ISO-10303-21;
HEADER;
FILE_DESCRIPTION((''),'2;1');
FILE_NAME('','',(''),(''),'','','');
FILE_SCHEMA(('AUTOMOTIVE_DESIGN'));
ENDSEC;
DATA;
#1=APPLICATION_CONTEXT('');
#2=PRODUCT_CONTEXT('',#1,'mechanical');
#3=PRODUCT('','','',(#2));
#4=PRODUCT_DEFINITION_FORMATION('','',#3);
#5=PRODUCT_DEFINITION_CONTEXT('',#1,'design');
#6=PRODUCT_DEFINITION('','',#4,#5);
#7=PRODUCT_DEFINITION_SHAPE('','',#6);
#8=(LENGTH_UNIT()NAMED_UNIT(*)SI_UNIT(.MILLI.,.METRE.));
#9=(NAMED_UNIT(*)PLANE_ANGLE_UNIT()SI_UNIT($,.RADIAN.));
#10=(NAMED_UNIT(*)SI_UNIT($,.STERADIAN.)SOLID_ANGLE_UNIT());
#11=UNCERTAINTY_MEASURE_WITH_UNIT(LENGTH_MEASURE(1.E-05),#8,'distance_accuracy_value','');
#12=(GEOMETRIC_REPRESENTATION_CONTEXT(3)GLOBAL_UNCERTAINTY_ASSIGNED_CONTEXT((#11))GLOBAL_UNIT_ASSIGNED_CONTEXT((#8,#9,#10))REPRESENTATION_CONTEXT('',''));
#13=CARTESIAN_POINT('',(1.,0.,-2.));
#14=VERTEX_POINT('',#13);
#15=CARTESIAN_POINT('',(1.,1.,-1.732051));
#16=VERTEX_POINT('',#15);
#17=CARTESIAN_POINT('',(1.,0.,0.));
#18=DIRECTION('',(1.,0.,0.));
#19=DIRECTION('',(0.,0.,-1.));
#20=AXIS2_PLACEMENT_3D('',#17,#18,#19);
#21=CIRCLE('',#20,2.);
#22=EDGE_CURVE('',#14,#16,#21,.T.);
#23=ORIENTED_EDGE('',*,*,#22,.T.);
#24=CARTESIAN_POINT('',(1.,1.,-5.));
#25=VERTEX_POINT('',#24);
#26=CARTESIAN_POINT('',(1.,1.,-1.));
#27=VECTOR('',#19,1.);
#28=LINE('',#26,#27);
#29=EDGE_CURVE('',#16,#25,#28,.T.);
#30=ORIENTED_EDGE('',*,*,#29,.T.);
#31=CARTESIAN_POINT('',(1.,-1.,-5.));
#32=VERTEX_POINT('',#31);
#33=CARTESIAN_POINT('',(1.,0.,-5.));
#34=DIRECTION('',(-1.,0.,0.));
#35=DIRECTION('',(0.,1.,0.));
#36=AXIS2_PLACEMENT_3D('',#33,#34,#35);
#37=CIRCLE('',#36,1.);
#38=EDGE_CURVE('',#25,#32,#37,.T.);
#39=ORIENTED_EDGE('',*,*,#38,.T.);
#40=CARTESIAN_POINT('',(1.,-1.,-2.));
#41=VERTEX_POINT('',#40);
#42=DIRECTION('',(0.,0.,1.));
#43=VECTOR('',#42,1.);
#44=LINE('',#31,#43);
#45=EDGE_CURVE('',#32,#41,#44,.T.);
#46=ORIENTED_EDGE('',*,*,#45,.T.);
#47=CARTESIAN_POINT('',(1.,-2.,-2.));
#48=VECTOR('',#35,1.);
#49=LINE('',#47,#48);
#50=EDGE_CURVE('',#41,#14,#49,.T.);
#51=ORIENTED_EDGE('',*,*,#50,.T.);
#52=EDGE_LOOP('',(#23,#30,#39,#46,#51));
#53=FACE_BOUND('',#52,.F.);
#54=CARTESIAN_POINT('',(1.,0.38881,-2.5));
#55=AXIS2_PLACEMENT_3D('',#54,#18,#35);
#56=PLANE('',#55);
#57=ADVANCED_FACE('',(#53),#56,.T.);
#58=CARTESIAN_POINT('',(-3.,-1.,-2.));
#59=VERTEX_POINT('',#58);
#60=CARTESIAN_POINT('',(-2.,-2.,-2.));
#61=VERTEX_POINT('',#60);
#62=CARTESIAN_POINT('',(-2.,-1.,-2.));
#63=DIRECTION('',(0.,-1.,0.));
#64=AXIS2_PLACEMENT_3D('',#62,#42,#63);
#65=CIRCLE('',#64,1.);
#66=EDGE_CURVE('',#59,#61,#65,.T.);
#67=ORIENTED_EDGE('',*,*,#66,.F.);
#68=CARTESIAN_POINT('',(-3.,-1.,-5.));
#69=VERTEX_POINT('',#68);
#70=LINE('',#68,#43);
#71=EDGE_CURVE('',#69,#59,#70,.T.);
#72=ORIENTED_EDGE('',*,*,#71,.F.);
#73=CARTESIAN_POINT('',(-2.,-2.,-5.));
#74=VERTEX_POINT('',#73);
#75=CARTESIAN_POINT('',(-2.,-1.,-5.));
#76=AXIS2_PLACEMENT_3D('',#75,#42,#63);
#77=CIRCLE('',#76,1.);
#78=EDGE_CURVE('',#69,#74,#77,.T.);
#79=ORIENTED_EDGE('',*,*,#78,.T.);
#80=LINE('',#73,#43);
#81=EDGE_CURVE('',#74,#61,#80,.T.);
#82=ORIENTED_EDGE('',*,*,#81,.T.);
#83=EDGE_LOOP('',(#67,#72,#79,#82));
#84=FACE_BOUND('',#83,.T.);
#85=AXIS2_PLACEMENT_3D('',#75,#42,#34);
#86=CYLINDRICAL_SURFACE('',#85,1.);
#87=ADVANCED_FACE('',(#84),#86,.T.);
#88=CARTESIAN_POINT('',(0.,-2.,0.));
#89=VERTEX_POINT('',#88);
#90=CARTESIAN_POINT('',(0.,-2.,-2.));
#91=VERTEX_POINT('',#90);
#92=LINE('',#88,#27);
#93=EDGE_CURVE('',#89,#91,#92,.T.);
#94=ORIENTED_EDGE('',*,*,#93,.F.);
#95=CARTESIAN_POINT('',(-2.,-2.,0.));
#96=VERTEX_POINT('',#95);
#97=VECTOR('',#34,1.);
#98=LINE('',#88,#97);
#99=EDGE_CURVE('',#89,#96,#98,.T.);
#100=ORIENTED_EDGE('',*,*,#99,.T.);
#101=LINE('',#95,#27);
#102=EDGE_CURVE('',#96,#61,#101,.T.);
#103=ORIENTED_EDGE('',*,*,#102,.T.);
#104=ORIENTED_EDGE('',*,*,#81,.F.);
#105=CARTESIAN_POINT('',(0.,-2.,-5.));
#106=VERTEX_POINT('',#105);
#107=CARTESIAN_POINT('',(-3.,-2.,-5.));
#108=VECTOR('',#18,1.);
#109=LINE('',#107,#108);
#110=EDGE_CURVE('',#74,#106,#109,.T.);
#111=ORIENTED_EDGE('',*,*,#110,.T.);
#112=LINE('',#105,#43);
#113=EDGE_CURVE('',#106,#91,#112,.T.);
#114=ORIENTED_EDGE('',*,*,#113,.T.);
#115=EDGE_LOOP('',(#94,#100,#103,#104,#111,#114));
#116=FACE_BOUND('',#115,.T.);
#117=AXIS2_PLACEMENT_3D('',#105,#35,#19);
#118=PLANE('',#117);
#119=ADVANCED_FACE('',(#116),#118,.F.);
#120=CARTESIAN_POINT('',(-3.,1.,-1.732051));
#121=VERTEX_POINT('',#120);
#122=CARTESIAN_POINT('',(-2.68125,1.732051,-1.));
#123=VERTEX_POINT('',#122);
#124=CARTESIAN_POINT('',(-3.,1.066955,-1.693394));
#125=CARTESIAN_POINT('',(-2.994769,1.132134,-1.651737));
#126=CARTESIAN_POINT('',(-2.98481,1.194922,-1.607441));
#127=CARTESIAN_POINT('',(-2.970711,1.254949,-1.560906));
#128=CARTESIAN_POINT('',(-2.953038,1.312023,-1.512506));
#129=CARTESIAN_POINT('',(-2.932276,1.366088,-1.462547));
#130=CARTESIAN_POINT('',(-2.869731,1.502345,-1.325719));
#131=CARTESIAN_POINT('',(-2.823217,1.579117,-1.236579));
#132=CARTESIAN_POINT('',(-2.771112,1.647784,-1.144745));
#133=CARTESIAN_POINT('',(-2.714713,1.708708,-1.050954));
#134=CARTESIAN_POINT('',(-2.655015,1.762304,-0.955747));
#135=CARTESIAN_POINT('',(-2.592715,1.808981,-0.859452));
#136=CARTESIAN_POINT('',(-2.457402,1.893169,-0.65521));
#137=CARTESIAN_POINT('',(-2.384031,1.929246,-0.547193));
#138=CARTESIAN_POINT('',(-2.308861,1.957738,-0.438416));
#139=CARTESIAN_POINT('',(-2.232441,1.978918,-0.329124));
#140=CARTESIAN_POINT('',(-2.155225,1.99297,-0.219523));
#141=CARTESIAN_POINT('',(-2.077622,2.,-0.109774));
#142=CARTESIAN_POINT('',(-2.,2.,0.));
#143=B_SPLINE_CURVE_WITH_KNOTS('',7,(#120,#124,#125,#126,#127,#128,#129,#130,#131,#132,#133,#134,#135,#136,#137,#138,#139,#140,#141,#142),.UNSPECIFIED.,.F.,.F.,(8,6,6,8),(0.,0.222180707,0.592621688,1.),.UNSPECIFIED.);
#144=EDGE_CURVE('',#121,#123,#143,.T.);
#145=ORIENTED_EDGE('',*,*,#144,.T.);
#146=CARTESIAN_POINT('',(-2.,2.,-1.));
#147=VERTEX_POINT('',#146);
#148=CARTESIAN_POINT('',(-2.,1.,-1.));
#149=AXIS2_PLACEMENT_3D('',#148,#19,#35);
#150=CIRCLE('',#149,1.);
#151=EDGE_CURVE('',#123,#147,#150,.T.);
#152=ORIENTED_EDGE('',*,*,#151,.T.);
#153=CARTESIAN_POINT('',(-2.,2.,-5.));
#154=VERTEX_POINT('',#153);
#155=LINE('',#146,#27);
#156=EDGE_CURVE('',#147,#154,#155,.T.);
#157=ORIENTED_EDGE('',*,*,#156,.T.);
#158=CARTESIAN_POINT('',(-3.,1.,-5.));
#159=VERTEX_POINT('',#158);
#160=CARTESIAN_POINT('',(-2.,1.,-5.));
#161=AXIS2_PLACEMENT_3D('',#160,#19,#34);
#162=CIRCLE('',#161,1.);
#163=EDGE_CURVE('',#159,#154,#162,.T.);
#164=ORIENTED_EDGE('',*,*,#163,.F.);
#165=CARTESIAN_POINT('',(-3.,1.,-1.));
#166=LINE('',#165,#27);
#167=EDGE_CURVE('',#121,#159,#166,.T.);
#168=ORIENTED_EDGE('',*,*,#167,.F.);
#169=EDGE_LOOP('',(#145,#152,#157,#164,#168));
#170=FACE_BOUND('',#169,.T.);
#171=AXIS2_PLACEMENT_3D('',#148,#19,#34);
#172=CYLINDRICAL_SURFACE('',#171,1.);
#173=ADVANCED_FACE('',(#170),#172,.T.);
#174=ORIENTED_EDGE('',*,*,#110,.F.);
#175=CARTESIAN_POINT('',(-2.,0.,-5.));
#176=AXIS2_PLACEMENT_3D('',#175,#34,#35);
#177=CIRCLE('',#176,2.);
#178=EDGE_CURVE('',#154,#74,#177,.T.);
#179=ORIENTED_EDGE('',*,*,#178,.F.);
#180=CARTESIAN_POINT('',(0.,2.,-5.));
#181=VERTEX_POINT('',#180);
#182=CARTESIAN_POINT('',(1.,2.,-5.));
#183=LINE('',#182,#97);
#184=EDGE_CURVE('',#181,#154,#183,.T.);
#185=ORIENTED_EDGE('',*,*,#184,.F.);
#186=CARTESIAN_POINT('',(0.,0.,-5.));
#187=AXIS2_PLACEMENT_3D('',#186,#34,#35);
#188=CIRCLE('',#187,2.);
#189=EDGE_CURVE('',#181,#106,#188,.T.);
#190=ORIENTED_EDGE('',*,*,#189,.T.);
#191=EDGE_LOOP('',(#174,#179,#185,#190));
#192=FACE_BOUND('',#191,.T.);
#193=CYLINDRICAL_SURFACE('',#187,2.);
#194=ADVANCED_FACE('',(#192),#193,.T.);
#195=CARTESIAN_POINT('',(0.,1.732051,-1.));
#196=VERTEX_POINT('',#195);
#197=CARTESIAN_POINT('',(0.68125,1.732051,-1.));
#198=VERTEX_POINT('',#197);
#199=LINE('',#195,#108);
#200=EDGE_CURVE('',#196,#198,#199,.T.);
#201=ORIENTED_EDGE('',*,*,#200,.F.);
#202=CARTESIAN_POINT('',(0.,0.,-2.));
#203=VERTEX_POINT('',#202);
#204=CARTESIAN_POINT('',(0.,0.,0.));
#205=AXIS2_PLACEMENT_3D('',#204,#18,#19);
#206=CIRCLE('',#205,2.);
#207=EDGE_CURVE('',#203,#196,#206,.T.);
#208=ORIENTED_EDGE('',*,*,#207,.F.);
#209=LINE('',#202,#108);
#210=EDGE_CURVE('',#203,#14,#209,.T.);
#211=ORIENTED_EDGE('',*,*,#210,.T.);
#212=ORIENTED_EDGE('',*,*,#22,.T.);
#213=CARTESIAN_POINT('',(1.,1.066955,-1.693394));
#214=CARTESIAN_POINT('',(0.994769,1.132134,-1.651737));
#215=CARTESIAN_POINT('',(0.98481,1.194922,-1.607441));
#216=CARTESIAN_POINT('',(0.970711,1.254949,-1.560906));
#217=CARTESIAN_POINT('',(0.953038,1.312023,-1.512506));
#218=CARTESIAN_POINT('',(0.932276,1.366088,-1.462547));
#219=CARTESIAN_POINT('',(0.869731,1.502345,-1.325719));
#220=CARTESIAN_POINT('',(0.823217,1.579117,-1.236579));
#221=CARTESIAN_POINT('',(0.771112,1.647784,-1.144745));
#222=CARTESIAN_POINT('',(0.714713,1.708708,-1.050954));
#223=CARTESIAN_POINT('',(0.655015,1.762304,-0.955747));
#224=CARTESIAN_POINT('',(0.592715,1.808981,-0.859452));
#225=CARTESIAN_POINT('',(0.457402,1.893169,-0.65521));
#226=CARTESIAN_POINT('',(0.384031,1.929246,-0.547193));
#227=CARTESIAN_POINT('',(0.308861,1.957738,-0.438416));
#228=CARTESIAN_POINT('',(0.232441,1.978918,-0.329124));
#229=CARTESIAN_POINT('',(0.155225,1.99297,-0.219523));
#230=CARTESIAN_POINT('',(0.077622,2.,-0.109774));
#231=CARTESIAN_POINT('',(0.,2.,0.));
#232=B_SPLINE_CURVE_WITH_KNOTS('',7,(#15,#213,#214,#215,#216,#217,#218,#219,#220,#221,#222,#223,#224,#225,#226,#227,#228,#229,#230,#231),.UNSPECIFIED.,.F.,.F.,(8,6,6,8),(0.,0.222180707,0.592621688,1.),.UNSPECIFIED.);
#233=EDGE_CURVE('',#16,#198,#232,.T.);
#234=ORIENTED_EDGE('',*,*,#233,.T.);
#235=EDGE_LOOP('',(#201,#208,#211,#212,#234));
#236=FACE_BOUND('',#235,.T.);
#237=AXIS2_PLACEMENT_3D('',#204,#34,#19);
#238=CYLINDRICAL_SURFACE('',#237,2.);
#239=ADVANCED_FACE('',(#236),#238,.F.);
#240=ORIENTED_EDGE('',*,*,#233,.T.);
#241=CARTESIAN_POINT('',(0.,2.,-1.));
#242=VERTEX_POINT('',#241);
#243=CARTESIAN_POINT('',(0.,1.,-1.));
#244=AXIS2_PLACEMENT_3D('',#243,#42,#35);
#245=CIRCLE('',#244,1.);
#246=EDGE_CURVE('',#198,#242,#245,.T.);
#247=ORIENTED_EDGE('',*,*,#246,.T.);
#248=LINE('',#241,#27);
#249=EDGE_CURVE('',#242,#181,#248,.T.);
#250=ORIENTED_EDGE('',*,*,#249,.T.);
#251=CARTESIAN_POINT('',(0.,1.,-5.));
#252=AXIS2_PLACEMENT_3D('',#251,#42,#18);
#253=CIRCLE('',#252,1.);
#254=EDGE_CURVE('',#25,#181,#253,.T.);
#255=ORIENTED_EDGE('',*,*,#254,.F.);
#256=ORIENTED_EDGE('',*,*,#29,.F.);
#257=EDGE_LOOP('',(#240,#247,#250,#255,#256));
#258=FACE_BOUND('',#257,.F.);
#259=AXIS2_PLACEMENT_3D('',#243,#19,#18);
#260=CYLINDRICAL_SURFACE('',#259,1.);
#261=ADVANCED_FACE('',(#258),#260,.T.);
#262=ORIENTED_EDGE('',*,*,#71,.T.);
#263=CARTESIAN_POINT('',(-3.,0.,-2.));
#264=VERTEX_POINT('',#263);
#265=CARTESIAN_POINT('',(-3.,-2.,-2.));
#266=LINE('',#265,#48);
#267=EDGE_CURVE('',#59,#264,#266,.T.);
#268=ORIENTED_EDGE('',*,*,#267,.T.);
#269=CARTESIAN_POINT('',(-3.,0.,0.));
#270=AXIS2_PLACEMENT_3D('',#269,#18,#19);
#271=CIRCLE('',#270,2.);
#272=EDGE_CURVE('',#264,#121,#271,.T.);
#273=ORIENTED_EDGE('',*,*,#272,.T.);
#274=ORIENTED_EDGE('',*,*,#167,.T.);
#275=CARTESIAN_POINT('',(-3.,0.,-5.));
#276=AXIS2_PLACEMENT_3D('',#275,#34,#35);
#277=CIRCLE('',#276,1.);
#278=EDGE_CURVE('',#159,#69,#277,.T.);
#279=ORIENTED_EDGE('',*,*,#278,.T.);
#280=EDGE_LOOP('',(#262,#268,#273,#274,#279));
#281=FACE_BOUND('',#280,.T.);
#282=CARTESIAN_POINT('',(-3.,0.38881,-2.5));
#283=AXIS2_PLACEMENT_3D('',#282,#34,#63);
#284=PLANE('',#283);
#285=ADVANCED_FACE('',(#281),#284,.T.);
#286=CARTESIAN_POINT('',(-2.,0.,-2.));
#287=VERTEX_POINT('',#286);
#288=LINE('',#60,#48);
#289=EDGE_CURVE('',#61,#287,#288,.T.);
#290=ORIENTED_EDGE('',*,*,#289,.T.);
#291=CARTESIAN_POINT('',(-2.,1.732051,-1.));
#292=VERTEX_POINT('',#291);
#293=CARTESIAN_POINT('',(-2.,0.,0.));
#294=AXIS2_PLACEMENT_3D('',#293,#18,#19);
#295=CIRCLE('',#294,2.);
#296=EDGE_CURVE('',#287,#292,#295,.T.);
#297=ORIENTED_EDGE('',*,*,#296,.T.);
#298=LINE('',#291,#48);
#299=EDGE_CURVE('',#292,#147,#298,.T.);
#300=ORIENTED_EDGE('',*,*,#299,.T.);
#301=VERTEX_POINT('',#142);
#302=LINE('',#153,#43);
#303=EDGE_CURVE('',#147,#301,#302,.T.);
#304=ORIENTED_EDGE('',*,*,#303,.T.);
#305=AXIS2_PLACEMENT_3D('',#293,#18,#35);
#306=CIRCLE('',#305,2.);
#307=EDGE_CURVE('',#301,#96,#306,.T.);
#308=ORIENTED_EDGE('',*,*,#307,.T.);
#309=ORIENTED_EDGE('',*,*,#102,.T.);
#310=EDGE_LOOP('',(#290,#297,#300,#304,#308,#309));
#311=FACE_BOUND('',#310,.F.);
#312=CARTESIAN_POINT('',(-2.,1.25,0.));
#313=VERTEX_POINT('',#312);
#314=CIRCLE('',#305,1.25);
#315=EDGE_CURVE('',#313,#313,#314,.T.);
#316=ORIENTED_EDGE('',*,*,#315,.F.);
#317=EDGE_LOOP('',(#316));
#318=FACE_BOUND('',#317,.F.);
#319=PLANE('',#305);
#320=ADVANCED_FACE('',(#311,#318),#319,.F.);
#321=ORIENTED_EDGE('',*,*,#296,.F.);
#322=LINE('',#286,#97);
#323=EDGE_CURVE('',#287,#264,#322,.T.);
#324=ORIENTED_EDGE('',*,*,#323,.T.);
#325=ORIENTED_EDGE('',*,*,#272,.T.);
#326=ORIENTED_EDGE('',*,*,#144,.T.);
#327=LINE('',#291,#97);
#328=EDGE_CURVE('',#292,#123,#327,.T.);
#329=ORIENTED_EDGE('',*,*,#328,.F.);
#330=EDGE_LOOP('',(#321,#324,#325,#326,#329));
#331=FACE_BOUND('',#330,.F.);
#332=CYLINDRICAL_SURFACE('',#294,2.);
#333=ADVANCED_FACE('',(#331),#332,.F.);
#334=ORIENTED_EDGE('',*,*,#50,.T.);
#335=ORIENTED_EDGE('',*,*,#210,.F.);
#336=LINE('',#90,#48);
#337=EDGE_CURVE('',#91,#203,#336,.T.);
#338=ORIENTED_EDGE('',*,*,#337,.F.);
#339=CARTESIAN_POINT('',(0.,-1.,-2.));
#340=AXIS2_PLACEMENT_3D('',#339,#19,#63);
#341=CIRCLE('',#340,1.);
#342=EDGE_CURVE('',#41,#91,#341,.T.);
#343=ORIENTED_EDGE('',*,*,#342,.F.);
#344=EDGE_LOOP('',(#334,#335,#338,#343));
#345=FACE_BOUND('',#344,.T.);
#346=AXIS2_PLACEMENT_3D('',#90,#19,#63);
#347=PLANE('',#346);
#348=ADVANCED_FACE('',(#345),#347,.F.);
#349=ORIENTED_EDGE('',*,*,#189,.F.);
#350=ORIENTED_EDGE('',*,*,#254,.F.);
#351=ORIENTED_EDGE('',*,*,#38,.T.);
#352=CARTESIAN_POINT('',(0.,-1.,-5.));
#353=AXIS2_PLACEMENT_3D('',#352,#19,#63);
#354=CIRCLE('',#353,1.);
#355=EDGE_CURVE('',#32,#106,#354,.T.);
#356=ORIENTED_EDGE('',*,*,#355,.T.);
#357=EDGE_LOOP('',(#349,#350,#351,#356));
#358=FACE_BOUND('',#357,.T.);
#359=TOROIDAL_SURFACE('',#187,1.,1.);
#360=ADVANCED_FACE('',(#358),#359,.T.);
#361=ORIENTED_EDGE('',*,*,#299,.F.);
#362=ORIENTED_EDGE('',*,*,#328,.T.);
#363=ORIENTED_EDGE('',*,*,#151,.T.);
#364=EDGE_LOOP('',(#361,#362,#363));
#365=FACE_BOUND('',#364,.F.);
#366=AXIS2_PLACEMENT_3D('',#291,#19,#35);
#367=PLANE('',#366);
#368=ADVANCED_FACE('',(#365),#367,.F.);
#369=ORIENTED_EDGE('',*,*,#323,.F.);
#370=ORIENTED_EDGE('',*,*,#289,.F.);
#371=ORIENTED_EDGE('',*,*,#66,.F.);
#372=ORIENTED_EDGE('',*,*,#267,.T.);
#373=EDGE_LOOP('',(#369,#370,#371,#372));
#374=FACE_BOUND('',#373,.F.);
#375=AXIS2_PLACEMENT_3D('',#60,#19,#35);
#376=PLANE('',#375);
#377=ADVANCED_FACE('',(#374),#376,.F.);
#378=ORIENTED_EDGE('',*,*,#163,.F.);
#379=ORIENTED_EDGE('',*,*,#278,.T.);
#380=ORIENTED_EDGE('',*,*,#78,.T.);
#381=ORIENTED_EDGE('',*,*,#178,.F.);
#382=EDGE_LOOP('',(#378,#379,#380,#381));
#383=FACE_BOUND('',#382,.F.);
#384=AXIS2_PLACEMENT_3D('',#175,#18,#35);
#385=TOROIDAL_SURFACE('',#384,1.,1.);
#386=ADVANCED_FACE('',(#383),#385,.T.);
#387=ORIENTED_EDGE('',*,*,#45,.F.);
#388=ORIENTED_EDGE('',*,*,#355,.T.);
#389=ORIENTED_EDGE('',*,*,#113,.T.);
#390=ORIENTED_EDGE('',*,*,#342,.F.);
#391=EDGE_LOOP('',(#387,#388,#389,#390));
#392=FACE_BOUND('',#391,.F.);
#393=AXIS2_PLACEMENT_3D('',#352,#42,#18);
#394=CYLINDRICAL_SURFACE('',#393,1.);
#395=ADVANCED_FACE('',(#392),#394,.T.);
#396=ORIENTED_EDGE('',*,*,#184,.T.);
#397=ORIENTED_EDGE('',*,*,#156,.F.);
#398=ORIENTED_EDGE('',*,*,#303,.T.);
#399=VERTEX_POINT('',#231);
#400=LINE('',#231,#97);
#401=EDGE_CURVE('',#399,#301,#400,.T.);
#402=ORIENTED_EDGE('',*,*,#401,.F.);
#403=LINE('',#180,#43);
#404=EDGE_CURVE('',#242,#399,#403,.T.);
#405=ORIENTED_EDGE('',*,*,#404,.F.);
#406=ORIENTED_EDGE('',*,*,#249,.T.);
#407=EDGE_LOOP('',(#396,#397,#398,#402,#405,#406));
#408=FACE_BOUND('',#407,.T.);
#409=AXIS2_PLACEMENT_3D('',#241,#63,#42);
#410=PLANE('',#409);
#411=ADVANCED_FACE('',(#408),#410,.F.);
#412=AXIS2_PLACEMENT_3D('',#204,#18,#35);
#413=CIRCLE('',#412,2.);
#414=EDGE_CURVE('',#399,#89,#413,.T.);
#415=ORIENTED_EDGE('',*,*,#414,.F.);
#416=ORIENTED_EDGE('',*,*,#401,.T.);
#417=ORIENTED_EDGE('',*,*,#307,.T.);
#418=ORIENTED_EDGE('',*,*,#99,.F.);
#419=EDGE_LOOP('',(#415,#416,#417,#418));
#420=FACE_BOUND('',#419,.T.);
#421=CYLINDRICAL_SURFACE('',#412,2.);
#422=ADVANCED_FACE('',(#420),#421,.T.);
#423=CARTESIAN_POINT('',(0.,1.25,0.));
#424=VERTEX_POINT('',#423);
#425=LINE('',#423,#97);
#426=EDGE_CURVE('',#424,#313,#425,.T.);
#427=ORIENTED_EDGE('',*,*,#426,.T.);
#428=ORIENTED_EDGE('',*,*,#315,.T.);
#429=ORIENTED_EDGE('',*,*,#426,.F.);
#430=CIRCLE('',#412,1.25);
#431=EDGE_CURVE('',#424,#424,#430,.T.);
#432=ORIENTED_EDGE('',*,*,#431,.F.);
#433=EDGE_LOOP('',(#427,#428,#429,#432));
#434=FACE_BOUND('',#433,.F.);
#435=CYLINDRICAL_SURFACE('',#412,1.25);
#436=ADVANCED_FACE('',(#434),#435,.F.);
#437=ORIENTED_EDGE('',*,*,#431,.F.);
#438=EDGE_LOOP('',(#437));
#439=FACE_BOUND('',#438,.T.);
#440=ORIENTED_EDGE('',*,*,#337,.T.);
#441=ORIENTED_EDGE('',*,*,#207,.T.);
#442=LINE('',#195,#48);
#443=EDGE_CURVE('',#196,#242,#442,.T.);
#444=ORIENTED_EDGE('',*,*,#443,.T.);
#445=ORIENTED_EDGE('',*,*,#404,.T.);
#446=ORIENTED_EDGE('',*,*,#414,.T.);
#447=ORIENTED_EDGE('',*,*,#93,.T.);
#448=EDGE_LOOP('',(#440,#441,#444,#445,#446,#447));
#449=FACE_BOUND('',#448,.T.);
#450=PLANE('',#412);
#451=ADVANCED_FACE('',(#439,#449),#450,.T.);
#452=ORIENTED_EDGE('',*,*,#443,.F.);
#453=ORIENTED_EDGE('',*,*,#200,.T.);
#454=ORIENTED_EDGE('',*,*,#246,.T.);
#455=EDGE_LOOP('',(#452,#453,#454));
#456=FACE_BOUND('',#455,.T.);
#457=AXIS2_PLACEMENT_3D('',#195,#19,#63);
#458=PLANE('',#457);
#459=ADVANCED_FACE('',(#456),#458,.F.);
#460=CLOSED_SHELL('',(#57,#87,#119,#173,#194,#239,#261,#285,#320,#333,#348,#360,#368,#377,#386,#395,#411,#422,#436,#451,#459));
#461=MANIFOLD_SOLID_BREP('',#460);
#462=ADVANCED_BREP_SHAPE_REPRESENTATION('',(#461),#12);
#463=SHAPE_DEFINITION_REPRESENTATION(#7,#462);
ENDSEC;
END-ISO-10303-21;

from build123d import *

# Parameters (mm, degrees)
F0_R     = 1.25
F1_DEPTH = 2
F3_DEPTH = 1
F5_R     = 1


# Not quite as in the source:
# - a pattern or mirror of a feature is missing from the dataset's text; its kind, count and spacing are read off the source's solid


with BuildPart() as f1:
    # F0 (on Right) → F1 (new body)
    with BuildSketch(Plane.YZ):
        with BuildLine():
            ThreePointArc((-2, 0), (0, -2), (2, 0))
            ThreePointArc((2, 0), (0, 2), (-2, 0))
        make_face()
        Circle(F0_R, mode=Mode.SUBTRACT)
        with BuildLine():
            Line((2, -5), (2, 0))
            ThreePointArc((2, 0), (0, -2), (-2, 0))
            Line((-2, 0), (-2, -5))
            ThreePointArc((-2, -5), (0, -3), (2, -5))
        make_face()
        with BuildLine():
            ThreePointArc((-2, -5), (0, -7), (2, -5))
            Line((2, -5), (-2, -5))
        make_face()
        with BuildLine():
            Line((-2, -5), (2, -5))
            ThreePointArc((2, -5), (0, -3), (-2, -5))
        make_face()
    extrude(amount=-F1_DEPTH)

    # F2 (on face) → F3 (join)
    with BuildSketch(Plane(origin=(-2, 0, 0), x_dir=(0, -1, 0), z_dir=(-1, 0, 0))):
        with BuildLine():
            ThreePointArc((0, -2), (-1, -1.7320508076), (-1.7320508076, -1))
            Line((-1.7320508076, -1), (-2, -1))
            Line((-2, -1), (-2, -4))
            Line((-2, -4), (-1.7320508076, -4))
            ThreePointArc((-1.7320508076, -4), (-1, -3.2679491924), (0, -3))
            Line((0, -3), (2, -3))
            Line((2, -3), (2, -2))
            Line((2, -2), (0, -2))
        make_face()
        with BuildLine():
            Line((-1.7320508076, -4), (-2, -4))
            Line((-2, -4), (-2, -5))
            ThreePointArc((-2, -5), (0, -7), (2, -5))
            Line((2, -5), (2, -3))
            Line((2, -3), (0, -3))
            ThreePointArc((0, -3), (-1, -3.2679491924), (-1.7320508076, -4))
        make_face()
    f3 = extrude(amount=F3_DEPTH)

    # F3_copies: F3 across plane
    add(f3.mirror(Plane(origin=(-1, 0, 0), x_dir=(0, 0, 1), z_dir=(1, 0, 0))))

    # F5
    f5_edges = [f1.edges().sort_by_distance(p)[0] for p in [
        (-3, 2, -3),
        (-3, -2, -3.5),
        (-3, 0, -7),
        (1, 0, -7),
        (1, 2, -3),
        (1, -2, -3.5),
    ]]
    fillet(f5_edges, radius=F5_R)


solid = f1.part
